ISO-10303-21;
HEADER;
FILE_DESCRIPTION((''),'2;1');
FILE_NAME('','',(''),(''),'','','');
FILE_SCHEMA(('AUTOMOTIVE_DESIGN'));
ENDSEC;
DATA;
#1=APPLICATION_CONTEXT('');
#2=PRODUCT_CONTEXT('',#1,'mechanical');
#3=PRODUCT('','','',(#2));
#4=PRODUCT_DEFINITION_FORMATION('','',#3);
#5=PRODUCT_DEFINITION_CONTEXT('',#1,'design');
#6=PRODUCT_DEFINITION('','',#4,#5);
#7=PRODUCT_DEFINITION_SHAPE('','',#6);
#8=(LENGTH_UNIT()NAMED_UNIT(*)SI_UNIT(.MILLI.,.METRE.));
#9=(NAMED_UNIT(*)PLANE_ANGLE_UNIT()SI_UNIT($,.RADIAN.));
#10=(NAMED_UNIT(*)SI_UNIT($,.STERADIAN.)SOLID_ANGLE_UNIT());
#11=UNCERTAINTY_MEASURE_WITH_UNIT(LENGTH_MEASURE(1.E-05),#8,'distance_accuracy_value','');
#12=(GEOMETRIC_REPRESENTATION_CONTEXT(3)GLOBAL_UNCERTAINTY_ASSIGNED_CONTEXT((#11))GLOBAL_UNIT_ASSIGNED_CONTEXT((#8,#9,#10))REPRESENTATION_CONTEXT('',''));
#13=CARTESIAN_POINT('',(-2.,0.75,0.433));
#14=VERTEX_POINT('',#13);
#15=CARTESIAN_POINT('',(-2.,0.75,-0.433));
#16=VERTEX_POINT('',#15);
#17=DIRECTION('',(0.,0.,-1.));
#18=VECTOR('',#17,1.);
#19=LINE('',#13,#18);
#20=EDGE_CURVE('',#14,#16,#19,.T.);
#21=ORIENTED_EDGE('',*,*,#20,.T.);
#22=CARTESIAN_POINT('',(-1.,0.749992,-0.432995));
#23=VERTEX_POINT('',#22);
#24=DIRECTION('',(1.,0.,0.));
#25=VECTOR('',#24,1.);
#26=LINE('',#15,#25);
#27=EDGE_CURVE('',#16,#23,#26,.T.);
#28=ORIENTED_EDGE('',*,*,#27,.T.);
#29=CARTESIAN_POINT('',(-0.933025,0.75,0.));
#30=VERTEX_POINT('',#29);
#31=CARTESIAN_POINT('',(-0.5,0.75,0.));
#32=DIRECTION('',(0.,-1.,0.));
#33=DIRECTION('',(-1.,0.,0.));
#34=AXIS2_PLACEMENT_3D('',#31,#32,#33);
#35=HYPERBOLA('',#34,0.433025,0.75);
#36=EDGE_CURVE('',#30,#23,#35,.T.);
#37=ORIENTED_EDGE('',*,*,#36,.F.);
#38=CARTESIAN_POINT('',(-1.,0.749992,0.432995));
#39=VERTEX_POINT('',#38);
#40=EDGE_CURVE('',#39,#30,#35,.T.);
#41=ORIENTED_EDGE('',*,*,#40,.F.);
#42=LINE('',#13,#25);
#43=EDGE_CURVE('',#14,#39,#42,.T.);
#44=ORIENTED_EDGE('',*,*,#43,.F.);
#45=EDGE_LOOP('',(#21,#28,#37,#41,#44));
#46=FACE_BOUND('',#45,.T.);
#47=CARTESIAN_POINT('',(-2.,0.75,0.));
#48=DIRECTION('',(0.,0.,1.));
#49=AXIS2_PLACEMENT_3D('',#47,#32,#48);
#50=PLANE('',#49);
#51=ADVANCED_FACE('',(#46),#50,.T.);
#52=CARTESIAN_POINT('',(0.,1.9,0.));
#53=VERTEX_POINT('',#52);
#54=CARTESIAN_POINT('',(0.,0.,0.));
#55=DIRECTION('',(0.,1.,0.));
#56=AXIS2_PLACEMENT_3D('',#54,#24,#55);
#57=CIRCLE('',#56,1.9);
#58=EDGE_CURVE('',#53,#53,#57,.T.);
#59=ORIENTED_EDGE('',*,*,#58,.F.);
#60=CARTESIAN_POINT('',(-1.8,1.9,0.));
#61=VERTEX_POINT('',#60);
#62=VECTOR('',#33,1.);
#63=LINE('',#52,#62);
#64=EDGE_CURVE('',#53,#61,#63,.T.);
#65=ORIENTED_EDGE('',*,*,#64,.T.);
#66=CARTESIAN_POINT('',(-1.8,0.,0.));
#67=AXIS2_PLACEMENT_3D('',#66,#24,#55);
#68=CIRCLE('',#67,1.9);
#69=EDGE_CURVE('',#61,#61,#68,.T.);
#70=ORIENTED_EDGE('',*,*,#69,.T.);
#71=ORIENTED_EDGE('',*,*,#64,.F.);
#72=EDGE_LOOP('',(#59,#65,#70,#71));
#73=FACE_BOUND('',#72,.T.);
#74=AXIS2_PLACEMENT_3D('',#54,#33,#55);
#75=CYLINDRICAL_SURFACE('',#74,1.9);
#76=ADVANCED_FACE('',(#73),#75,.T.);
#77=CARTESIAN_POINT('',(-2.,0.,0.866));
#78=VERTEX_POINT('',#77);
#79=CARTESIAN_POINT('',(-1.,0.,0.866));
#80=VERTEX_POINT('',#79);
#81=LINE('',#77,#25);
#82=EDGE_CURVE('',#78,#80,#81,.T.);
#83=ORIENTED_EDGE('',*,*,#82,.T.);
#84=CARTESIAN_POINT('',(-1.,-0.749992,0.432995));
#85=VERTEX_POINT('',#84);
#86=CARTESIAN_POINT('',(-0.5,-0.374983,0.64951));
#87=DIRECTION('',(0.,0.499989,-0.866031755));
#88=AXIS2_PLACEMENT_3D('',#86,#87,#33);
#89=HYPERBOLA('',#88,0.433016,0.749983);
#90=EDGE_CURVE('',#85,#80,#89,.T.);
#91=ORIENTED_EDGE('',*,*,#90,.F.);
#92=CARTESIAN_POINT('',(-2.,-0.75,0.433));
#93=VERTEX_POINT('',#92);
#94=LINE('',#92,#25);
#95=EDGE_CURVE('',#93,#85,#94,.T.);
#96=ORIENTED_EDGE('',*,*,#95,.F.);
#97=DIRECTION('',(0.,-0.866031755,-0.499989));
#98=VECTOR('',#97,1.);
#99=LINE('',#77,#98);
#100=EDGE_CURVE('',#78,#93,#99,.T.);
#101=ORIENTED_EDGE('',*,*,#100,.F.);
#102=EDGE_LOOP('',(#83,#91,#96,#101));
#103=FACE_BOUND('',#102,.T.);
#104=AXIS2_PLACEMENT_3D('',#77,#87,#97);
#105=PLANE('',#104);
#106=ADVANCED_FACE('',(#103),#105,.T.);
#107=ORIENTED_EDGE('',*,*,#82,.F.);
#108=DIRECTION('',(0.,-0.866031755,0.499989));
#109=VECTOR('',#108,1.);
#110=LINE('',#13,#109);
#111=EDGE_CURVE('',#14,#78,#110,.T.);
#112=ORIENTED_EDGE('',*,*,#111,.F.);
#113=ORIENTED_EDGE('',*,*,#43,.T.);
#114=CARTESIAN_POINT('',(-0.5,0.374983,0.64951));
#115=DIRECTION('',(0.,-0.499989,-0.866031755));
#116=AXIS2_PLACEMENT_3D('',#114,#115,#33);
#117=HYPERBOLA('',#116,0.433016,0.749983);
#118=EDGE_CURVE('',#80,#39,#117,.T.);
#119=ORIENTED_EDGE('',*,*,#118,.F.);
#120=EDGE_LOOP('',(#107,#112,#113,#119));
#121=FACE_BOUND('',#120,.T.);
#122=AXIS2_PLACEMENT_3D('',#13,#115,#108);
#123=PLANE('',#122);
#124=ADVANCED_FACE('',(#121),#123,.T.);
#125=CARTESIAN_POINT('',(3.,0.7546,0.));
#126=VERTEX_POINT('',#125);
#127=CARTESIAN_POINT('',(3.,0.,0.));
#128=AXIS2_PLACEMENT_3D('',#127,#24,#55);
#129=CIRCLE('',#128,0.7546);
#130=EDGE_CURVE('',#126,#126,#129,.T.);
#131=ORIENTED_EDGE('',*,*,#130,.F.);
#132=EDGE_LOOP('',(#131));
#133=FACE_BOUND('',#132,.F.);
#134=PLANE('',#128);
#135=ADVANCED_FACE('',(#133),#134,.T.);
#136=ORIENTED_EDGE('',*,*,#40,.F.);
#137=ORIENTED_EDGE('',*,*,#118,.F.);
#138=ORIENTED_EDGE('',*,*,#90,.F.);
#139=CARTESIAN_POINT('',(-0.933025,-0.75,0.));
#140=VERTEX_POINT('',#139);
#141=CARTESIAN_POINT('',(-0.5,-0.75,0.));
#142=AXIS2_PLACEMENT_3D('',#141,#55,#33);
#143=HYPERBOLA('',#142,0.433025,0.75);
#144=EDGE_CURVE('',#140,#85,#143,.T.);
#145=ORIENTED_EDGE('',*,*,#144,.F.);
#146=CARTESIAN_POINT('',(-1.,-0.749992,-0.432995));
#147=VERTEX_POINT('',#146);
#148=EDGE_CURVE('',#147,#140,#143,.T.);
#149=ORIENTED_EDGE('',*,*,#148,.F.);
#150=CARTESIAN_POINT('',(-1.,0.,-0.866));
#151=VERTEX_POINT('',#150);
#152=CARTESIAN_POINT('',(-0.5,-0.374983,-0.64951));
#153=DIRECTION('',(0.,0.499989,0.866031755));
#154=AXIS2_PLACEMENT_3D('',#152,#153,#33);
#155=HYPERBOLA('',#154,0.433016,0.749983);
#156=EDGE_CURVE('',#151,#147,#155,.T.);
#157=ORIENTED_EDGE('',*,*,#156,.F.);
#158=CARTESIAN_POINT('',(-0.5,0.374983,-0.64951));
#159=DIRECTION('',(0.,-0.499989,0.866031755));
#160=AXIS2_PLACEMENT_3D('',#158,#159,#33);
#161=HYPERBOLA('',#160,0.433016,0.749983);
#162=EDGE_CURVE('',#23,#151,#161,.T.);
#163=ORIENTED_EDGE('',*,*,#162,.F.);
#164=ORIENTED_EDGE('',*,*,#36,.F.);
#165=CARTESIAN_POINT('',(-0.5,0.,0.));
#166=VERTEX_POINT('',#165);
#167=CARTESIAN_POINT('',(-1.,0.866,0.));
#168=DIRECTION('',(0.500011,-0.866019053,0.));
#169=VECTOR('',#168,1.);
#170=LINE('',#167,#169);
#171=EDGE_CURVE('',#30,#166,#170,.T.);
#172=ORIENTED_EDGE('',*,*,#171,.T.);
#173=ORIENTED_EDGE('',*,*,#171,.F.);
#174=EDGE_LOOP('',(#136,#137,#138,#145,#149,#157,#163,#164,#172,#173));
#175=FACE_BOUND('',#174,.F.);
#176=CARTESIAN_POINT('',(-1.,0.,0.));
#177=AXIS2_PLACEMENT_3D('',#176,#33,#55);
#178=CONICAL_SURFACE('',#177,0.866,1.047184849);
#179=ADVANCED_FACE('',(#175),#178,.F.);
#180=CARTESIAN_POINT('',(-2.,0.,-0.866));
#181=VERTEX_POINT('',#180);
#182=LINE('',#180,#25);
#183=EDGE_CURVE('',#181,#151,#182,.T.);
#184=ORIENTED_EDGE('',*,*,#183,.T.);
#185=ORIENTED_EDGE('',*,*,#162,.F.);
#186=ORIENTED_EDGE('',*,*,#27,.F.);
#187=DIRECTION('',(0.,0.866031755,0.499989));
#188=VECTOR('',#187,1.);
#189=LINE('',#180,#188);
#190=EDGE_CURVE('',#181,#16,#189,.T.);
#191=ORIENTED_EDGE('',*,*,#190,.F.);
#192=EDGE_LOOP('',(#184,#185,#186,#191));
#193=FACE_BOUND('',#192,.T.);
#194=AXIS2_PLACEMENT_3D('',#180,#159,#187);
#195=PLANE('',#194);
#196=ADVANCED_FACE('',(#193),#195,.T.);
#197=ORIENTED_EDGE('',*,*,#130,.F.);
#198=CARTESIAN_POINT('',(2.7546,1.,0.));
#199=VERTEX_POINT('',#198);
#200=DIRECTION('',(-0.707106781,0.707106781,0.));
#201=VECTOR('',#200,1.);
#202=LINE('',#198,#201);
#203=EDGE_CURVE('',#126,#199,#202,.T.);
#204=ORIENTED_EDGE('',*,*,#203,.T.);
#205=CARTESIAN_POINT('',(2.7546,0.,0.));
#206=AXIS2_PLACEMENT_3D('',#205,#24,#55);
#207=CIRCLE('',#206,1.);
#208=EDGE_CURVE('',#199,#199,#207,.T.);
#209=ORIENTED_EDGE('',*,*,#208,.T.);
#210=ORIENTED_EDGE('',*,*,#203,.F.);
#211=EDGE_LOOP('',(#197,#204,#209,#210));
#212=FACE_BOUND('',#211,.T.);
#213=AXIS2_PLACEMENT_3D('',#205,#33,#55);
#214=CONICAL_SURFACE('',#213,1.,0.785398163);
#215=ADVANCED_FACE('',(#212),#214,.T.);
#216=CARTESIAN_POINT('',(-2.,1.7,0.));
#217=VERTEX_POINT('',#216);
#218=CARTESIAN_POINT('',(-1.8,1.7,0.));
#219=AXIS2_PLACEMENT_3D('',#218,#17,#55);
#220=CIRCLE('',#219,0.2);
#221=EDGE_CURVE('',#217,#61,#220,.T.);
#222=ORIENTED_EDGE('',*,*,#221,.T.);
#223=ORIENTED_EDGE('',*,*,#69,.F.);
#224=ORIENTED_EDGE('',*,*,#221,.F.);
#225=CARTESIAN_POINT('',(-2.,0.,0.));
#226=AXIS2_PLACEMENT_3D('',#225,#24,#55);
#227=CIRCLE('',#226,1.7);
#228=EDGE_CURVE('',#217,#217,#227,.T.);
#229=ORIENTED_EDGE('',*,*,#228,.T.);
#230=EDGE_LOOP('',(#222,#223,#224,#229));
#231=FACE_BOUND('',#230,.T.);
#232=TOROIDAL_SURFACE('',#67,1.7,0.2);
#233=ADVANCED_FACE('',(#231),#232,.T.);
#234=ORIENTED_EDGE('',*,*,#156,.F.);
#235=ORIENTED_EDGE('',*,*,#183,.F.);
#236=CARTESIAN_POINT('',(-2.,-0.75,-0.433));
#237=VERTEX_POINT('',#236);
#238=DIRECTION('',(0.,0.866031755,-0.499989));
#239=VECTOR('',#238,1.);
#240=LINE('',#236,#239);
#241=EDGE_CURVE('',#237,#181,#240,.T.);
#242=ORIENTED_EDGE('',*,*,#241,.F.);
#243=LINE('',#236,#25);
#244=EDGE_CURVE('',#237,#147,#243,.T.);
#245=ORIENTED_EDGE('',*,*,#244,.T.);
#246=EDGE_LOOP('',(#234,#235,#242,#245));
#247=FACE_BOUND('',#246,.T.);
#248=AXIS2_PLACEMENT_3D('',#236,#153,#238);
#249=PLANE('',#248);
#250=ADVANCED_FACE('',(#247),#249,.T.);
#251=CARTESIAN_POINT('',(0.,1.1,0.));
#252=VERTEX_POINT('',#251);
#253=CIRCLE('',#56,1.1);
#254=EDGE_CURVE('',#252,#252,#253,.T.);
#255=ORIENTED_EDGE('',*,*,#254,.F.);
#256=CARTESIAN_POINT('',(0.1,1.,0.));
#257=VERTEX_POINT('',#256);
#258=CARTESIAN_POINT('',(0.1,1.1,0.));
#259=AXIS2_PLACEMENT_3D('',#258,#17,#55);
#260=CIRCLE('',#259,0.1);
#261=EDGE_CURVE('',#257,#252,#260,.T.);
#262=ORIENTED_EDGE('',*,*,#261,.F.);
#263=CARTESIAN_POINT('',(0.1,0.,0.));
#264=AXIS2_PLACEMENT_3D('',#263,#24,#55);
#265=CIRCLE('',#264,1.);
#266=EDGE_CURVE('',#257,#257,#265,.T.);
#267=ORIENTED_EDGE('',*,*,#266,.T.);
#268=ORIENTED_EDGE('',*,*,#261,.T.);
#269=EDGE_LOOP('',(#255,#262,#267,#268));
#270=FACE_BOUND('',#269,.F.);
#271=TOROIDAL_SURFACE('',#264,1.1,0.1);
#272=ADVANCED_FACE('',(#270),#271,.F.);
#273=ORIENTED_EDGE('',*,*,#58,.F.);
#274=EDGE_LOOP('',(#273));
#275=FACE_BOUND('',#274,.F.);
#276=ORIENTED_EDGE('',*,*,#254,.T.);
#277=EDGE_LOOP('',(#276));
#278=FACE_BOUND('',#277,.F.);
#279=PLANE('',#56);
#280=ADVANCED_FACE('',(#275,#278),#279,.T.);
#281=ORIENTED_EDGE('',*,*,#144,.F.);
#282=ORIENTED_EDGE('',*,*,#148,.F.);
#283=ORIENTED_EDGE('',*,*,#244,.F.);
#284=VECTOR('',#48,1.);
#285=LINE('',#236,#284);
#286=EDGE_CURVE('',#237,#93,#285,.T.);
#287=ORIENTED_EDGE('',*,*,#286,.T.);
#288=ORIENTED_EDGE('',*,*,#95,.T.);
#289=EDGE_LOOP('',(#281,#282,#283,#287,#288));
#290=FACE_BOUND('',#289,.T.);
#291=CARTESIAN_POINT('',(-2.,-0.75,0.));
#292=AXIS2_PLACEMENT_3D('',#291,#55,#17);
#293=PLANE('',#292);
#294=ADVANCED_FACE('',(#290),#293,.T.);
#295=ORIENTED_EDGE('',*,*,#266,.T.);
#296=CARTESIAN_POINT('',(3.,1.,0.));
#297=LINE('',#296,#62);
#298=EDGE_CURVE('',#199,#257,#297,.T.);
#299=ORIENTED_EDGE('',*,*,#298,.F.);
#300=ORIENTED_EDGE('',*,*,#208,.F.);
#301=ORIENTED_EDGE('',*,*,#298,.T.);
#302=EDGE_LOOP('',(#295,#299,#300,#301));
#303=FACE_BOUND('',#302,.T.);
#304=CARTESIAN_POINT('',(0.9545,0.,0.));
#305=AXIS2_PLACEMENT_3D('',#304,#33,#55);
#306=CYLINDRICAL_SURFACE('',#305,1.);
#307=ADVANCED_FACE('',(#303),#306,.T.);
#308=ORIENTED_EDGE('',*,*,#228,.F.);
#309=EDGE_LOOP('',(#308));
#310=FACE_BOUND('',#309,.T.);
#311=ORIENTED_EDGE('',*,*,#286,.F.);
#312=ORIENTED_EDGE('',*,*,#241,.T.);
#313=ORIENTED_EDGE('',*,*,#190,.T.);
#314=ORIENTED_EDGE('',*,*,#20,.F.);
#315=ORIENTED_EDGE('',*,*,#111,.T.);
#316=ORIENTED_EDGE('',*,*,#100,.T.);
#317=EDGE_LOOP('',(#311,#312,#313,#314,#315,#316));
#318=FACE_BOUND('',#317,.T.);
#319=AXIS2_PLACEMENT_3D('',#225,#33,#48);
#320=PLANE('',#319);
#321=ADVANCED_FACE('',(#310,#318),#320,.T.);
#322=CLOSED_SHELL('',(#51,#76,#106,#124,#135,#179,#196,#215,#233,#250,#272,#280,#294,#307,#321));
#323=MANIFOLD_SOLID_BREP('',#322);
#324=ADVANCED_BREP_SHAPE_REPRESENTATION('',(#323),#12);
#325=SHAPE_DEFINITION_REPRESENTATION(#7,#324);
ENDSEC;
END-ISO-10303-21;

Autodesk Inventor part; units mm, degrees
ref_plane "YZ Plane" through (0, 0, 0) normal (1, 0, 0) x (0, 1, 0)
ref_plane "XZ Plane" through (0, 0, 0) normal (0, 1, 0) x (-1, 0, 0)
sketch "Sketch1" plane through (0, 0, 0) normal (0, 0, 1) x (1, 0, 0)
  line L0 (-0.5, 0) -> (3, 0)
  line L1 (3, 0) -> (3, 1)
  line L2 (3, 1) -> (1.2, 1)
  line L3 (1.2, 1) -> (0.9545, 1)
  line L4 (0.9545, 1) -> (0, 1)
  line L5 (0, 1) -> (0, 1.9)
  line L6 (0, 1.9) -> (-2, 1.9)
  line L7 (-2, 1.9) -> (-2, 0.866)
  line L8 (-2, 0.866) -> (-1, 0.866)
  line L9 (-1, 0.866) -> (-0.5, 0)
  line L10 (-3, 0) -> (4, 0) projected
  line L11 (0, -0.38) -> (0, 2.28) projected
  line L12 (1.2, 1) -> (0, 1) construction
  dimension "d1" = 1.8
  dimension "d2" = 0.2455
  dimension "d3" = 2
  dimension "d4" = 1
  dimension "d5" = 60
  dimension "d6" = 2
  dimension "d7" = 2
  dimension "d8" = 1.7321
  dimension "d9" = 3.8
  dimension "d26" = 3
revolve "Body" add sketch "Sketch1" angle 360 about axis through (-0.5, 0, 0) along (1, 0, 0)
sketch "Sketch2" plane through (-2, 0, 0) normal (-1, 0, 0) x (0, 0, 1)
  circle A0 centre (0, 0) radius 0.866 projected
  line L0 (0, -2.66) -> (0, 2.66) projected
  line L1 (-2.66, 0) -> (2.66, 0) projected
  line L2 (0.866, 0) -> (0.433, -0.75)
  line L3 (0.433, -0.75) -> (-0.433, -0.75)
  line L4 (-0.433, -0.75) -> (-0.866, 0)
  line L5 (-0.866, 0) -> (-0.433, 0.75)
  line L6 (-0.433, 0.75) -> (0.433, 0.75)
  line L7 (0.433, 0.75) -> (0.866, 0)
extrude "Slot" add sketch "Sketch2" against normal up to next contours L7 A0 | A0 L2 | L6 L0 A0 | A0 L0 L3 | L0 L6 A0 | A0 L3 L0 | L4 A0 | A0 L5
fillet "Fillet1" radius 0.2 1 edges at (-2, -1.9, 0)
thread "Thread" size "M2x0.4" class "6g" standard "ISO Metric profile" length 1.8
chamfer "Chamfer1" distance 0.2454 distance2 0.2454 1 edges at (3, -1, 0) measured on face at (3, -0.4588, -0.3309)
ref_plane "Work Plane1" through (29, 0, 0) normal (0, -1, 0) x (1, 0, 0)
fillet "Fillet2" radius 0.1 1 edges at (0, -1, 0)
equation "\"d1\" = GEL"
equation "\"d3\" = KOH"
equation "\"d4\" = INTI"
equation "\"d6\" = GD"
equation "\"d7\" = BDM"
equation "\"d8\" = 1.1547 * SW"
equation "\"d9\" = KOD"
equation "\"d26\" = NLG"
equation "\"d30\" = R"
equation "\"d17\" = RR"
equation "\"d13\" = GEL"
equation "\"d15\" = -0.5 * SPD + 0.5 * GD"
equation "\"d16\" = GUL"
equation "\"GD\" = 2"
equation "\"NLG\" = 3"
equation "\"GEL\" = 1.8"
equation "\"KOD\" = 3.8"
equation "\"KOH\" = 2"
equation "\"INTI\" = 1"
equation "\"GAL\" = 0.61345 * PTC"
equation "\"GUL\" = 0.61345 * PTC"
equation "\"BDM\" = NND"
equation "\"SW\" = 1.5"
equation "\"RR\" = 0.2"
equation "\"SPD\" = NND - 1.2269 * PTC"
equation "\"R\" = 0.1"
equation "\"TOA\" = 30deg"
equation "\"GD1\" = THREADDIA - 1.2269 * PTC"
equation "\"THREADDIA\" = 2"
equation "\"FAWI\" = 45deg"
equation "\"PTC\" = 0.4"
equation "\"NND\" = 2"
equation "\"E0\" = 1.155 * SW"
properties part number "ISO 4762  - M2 x 3" material "Stainless Steel, 440C"
